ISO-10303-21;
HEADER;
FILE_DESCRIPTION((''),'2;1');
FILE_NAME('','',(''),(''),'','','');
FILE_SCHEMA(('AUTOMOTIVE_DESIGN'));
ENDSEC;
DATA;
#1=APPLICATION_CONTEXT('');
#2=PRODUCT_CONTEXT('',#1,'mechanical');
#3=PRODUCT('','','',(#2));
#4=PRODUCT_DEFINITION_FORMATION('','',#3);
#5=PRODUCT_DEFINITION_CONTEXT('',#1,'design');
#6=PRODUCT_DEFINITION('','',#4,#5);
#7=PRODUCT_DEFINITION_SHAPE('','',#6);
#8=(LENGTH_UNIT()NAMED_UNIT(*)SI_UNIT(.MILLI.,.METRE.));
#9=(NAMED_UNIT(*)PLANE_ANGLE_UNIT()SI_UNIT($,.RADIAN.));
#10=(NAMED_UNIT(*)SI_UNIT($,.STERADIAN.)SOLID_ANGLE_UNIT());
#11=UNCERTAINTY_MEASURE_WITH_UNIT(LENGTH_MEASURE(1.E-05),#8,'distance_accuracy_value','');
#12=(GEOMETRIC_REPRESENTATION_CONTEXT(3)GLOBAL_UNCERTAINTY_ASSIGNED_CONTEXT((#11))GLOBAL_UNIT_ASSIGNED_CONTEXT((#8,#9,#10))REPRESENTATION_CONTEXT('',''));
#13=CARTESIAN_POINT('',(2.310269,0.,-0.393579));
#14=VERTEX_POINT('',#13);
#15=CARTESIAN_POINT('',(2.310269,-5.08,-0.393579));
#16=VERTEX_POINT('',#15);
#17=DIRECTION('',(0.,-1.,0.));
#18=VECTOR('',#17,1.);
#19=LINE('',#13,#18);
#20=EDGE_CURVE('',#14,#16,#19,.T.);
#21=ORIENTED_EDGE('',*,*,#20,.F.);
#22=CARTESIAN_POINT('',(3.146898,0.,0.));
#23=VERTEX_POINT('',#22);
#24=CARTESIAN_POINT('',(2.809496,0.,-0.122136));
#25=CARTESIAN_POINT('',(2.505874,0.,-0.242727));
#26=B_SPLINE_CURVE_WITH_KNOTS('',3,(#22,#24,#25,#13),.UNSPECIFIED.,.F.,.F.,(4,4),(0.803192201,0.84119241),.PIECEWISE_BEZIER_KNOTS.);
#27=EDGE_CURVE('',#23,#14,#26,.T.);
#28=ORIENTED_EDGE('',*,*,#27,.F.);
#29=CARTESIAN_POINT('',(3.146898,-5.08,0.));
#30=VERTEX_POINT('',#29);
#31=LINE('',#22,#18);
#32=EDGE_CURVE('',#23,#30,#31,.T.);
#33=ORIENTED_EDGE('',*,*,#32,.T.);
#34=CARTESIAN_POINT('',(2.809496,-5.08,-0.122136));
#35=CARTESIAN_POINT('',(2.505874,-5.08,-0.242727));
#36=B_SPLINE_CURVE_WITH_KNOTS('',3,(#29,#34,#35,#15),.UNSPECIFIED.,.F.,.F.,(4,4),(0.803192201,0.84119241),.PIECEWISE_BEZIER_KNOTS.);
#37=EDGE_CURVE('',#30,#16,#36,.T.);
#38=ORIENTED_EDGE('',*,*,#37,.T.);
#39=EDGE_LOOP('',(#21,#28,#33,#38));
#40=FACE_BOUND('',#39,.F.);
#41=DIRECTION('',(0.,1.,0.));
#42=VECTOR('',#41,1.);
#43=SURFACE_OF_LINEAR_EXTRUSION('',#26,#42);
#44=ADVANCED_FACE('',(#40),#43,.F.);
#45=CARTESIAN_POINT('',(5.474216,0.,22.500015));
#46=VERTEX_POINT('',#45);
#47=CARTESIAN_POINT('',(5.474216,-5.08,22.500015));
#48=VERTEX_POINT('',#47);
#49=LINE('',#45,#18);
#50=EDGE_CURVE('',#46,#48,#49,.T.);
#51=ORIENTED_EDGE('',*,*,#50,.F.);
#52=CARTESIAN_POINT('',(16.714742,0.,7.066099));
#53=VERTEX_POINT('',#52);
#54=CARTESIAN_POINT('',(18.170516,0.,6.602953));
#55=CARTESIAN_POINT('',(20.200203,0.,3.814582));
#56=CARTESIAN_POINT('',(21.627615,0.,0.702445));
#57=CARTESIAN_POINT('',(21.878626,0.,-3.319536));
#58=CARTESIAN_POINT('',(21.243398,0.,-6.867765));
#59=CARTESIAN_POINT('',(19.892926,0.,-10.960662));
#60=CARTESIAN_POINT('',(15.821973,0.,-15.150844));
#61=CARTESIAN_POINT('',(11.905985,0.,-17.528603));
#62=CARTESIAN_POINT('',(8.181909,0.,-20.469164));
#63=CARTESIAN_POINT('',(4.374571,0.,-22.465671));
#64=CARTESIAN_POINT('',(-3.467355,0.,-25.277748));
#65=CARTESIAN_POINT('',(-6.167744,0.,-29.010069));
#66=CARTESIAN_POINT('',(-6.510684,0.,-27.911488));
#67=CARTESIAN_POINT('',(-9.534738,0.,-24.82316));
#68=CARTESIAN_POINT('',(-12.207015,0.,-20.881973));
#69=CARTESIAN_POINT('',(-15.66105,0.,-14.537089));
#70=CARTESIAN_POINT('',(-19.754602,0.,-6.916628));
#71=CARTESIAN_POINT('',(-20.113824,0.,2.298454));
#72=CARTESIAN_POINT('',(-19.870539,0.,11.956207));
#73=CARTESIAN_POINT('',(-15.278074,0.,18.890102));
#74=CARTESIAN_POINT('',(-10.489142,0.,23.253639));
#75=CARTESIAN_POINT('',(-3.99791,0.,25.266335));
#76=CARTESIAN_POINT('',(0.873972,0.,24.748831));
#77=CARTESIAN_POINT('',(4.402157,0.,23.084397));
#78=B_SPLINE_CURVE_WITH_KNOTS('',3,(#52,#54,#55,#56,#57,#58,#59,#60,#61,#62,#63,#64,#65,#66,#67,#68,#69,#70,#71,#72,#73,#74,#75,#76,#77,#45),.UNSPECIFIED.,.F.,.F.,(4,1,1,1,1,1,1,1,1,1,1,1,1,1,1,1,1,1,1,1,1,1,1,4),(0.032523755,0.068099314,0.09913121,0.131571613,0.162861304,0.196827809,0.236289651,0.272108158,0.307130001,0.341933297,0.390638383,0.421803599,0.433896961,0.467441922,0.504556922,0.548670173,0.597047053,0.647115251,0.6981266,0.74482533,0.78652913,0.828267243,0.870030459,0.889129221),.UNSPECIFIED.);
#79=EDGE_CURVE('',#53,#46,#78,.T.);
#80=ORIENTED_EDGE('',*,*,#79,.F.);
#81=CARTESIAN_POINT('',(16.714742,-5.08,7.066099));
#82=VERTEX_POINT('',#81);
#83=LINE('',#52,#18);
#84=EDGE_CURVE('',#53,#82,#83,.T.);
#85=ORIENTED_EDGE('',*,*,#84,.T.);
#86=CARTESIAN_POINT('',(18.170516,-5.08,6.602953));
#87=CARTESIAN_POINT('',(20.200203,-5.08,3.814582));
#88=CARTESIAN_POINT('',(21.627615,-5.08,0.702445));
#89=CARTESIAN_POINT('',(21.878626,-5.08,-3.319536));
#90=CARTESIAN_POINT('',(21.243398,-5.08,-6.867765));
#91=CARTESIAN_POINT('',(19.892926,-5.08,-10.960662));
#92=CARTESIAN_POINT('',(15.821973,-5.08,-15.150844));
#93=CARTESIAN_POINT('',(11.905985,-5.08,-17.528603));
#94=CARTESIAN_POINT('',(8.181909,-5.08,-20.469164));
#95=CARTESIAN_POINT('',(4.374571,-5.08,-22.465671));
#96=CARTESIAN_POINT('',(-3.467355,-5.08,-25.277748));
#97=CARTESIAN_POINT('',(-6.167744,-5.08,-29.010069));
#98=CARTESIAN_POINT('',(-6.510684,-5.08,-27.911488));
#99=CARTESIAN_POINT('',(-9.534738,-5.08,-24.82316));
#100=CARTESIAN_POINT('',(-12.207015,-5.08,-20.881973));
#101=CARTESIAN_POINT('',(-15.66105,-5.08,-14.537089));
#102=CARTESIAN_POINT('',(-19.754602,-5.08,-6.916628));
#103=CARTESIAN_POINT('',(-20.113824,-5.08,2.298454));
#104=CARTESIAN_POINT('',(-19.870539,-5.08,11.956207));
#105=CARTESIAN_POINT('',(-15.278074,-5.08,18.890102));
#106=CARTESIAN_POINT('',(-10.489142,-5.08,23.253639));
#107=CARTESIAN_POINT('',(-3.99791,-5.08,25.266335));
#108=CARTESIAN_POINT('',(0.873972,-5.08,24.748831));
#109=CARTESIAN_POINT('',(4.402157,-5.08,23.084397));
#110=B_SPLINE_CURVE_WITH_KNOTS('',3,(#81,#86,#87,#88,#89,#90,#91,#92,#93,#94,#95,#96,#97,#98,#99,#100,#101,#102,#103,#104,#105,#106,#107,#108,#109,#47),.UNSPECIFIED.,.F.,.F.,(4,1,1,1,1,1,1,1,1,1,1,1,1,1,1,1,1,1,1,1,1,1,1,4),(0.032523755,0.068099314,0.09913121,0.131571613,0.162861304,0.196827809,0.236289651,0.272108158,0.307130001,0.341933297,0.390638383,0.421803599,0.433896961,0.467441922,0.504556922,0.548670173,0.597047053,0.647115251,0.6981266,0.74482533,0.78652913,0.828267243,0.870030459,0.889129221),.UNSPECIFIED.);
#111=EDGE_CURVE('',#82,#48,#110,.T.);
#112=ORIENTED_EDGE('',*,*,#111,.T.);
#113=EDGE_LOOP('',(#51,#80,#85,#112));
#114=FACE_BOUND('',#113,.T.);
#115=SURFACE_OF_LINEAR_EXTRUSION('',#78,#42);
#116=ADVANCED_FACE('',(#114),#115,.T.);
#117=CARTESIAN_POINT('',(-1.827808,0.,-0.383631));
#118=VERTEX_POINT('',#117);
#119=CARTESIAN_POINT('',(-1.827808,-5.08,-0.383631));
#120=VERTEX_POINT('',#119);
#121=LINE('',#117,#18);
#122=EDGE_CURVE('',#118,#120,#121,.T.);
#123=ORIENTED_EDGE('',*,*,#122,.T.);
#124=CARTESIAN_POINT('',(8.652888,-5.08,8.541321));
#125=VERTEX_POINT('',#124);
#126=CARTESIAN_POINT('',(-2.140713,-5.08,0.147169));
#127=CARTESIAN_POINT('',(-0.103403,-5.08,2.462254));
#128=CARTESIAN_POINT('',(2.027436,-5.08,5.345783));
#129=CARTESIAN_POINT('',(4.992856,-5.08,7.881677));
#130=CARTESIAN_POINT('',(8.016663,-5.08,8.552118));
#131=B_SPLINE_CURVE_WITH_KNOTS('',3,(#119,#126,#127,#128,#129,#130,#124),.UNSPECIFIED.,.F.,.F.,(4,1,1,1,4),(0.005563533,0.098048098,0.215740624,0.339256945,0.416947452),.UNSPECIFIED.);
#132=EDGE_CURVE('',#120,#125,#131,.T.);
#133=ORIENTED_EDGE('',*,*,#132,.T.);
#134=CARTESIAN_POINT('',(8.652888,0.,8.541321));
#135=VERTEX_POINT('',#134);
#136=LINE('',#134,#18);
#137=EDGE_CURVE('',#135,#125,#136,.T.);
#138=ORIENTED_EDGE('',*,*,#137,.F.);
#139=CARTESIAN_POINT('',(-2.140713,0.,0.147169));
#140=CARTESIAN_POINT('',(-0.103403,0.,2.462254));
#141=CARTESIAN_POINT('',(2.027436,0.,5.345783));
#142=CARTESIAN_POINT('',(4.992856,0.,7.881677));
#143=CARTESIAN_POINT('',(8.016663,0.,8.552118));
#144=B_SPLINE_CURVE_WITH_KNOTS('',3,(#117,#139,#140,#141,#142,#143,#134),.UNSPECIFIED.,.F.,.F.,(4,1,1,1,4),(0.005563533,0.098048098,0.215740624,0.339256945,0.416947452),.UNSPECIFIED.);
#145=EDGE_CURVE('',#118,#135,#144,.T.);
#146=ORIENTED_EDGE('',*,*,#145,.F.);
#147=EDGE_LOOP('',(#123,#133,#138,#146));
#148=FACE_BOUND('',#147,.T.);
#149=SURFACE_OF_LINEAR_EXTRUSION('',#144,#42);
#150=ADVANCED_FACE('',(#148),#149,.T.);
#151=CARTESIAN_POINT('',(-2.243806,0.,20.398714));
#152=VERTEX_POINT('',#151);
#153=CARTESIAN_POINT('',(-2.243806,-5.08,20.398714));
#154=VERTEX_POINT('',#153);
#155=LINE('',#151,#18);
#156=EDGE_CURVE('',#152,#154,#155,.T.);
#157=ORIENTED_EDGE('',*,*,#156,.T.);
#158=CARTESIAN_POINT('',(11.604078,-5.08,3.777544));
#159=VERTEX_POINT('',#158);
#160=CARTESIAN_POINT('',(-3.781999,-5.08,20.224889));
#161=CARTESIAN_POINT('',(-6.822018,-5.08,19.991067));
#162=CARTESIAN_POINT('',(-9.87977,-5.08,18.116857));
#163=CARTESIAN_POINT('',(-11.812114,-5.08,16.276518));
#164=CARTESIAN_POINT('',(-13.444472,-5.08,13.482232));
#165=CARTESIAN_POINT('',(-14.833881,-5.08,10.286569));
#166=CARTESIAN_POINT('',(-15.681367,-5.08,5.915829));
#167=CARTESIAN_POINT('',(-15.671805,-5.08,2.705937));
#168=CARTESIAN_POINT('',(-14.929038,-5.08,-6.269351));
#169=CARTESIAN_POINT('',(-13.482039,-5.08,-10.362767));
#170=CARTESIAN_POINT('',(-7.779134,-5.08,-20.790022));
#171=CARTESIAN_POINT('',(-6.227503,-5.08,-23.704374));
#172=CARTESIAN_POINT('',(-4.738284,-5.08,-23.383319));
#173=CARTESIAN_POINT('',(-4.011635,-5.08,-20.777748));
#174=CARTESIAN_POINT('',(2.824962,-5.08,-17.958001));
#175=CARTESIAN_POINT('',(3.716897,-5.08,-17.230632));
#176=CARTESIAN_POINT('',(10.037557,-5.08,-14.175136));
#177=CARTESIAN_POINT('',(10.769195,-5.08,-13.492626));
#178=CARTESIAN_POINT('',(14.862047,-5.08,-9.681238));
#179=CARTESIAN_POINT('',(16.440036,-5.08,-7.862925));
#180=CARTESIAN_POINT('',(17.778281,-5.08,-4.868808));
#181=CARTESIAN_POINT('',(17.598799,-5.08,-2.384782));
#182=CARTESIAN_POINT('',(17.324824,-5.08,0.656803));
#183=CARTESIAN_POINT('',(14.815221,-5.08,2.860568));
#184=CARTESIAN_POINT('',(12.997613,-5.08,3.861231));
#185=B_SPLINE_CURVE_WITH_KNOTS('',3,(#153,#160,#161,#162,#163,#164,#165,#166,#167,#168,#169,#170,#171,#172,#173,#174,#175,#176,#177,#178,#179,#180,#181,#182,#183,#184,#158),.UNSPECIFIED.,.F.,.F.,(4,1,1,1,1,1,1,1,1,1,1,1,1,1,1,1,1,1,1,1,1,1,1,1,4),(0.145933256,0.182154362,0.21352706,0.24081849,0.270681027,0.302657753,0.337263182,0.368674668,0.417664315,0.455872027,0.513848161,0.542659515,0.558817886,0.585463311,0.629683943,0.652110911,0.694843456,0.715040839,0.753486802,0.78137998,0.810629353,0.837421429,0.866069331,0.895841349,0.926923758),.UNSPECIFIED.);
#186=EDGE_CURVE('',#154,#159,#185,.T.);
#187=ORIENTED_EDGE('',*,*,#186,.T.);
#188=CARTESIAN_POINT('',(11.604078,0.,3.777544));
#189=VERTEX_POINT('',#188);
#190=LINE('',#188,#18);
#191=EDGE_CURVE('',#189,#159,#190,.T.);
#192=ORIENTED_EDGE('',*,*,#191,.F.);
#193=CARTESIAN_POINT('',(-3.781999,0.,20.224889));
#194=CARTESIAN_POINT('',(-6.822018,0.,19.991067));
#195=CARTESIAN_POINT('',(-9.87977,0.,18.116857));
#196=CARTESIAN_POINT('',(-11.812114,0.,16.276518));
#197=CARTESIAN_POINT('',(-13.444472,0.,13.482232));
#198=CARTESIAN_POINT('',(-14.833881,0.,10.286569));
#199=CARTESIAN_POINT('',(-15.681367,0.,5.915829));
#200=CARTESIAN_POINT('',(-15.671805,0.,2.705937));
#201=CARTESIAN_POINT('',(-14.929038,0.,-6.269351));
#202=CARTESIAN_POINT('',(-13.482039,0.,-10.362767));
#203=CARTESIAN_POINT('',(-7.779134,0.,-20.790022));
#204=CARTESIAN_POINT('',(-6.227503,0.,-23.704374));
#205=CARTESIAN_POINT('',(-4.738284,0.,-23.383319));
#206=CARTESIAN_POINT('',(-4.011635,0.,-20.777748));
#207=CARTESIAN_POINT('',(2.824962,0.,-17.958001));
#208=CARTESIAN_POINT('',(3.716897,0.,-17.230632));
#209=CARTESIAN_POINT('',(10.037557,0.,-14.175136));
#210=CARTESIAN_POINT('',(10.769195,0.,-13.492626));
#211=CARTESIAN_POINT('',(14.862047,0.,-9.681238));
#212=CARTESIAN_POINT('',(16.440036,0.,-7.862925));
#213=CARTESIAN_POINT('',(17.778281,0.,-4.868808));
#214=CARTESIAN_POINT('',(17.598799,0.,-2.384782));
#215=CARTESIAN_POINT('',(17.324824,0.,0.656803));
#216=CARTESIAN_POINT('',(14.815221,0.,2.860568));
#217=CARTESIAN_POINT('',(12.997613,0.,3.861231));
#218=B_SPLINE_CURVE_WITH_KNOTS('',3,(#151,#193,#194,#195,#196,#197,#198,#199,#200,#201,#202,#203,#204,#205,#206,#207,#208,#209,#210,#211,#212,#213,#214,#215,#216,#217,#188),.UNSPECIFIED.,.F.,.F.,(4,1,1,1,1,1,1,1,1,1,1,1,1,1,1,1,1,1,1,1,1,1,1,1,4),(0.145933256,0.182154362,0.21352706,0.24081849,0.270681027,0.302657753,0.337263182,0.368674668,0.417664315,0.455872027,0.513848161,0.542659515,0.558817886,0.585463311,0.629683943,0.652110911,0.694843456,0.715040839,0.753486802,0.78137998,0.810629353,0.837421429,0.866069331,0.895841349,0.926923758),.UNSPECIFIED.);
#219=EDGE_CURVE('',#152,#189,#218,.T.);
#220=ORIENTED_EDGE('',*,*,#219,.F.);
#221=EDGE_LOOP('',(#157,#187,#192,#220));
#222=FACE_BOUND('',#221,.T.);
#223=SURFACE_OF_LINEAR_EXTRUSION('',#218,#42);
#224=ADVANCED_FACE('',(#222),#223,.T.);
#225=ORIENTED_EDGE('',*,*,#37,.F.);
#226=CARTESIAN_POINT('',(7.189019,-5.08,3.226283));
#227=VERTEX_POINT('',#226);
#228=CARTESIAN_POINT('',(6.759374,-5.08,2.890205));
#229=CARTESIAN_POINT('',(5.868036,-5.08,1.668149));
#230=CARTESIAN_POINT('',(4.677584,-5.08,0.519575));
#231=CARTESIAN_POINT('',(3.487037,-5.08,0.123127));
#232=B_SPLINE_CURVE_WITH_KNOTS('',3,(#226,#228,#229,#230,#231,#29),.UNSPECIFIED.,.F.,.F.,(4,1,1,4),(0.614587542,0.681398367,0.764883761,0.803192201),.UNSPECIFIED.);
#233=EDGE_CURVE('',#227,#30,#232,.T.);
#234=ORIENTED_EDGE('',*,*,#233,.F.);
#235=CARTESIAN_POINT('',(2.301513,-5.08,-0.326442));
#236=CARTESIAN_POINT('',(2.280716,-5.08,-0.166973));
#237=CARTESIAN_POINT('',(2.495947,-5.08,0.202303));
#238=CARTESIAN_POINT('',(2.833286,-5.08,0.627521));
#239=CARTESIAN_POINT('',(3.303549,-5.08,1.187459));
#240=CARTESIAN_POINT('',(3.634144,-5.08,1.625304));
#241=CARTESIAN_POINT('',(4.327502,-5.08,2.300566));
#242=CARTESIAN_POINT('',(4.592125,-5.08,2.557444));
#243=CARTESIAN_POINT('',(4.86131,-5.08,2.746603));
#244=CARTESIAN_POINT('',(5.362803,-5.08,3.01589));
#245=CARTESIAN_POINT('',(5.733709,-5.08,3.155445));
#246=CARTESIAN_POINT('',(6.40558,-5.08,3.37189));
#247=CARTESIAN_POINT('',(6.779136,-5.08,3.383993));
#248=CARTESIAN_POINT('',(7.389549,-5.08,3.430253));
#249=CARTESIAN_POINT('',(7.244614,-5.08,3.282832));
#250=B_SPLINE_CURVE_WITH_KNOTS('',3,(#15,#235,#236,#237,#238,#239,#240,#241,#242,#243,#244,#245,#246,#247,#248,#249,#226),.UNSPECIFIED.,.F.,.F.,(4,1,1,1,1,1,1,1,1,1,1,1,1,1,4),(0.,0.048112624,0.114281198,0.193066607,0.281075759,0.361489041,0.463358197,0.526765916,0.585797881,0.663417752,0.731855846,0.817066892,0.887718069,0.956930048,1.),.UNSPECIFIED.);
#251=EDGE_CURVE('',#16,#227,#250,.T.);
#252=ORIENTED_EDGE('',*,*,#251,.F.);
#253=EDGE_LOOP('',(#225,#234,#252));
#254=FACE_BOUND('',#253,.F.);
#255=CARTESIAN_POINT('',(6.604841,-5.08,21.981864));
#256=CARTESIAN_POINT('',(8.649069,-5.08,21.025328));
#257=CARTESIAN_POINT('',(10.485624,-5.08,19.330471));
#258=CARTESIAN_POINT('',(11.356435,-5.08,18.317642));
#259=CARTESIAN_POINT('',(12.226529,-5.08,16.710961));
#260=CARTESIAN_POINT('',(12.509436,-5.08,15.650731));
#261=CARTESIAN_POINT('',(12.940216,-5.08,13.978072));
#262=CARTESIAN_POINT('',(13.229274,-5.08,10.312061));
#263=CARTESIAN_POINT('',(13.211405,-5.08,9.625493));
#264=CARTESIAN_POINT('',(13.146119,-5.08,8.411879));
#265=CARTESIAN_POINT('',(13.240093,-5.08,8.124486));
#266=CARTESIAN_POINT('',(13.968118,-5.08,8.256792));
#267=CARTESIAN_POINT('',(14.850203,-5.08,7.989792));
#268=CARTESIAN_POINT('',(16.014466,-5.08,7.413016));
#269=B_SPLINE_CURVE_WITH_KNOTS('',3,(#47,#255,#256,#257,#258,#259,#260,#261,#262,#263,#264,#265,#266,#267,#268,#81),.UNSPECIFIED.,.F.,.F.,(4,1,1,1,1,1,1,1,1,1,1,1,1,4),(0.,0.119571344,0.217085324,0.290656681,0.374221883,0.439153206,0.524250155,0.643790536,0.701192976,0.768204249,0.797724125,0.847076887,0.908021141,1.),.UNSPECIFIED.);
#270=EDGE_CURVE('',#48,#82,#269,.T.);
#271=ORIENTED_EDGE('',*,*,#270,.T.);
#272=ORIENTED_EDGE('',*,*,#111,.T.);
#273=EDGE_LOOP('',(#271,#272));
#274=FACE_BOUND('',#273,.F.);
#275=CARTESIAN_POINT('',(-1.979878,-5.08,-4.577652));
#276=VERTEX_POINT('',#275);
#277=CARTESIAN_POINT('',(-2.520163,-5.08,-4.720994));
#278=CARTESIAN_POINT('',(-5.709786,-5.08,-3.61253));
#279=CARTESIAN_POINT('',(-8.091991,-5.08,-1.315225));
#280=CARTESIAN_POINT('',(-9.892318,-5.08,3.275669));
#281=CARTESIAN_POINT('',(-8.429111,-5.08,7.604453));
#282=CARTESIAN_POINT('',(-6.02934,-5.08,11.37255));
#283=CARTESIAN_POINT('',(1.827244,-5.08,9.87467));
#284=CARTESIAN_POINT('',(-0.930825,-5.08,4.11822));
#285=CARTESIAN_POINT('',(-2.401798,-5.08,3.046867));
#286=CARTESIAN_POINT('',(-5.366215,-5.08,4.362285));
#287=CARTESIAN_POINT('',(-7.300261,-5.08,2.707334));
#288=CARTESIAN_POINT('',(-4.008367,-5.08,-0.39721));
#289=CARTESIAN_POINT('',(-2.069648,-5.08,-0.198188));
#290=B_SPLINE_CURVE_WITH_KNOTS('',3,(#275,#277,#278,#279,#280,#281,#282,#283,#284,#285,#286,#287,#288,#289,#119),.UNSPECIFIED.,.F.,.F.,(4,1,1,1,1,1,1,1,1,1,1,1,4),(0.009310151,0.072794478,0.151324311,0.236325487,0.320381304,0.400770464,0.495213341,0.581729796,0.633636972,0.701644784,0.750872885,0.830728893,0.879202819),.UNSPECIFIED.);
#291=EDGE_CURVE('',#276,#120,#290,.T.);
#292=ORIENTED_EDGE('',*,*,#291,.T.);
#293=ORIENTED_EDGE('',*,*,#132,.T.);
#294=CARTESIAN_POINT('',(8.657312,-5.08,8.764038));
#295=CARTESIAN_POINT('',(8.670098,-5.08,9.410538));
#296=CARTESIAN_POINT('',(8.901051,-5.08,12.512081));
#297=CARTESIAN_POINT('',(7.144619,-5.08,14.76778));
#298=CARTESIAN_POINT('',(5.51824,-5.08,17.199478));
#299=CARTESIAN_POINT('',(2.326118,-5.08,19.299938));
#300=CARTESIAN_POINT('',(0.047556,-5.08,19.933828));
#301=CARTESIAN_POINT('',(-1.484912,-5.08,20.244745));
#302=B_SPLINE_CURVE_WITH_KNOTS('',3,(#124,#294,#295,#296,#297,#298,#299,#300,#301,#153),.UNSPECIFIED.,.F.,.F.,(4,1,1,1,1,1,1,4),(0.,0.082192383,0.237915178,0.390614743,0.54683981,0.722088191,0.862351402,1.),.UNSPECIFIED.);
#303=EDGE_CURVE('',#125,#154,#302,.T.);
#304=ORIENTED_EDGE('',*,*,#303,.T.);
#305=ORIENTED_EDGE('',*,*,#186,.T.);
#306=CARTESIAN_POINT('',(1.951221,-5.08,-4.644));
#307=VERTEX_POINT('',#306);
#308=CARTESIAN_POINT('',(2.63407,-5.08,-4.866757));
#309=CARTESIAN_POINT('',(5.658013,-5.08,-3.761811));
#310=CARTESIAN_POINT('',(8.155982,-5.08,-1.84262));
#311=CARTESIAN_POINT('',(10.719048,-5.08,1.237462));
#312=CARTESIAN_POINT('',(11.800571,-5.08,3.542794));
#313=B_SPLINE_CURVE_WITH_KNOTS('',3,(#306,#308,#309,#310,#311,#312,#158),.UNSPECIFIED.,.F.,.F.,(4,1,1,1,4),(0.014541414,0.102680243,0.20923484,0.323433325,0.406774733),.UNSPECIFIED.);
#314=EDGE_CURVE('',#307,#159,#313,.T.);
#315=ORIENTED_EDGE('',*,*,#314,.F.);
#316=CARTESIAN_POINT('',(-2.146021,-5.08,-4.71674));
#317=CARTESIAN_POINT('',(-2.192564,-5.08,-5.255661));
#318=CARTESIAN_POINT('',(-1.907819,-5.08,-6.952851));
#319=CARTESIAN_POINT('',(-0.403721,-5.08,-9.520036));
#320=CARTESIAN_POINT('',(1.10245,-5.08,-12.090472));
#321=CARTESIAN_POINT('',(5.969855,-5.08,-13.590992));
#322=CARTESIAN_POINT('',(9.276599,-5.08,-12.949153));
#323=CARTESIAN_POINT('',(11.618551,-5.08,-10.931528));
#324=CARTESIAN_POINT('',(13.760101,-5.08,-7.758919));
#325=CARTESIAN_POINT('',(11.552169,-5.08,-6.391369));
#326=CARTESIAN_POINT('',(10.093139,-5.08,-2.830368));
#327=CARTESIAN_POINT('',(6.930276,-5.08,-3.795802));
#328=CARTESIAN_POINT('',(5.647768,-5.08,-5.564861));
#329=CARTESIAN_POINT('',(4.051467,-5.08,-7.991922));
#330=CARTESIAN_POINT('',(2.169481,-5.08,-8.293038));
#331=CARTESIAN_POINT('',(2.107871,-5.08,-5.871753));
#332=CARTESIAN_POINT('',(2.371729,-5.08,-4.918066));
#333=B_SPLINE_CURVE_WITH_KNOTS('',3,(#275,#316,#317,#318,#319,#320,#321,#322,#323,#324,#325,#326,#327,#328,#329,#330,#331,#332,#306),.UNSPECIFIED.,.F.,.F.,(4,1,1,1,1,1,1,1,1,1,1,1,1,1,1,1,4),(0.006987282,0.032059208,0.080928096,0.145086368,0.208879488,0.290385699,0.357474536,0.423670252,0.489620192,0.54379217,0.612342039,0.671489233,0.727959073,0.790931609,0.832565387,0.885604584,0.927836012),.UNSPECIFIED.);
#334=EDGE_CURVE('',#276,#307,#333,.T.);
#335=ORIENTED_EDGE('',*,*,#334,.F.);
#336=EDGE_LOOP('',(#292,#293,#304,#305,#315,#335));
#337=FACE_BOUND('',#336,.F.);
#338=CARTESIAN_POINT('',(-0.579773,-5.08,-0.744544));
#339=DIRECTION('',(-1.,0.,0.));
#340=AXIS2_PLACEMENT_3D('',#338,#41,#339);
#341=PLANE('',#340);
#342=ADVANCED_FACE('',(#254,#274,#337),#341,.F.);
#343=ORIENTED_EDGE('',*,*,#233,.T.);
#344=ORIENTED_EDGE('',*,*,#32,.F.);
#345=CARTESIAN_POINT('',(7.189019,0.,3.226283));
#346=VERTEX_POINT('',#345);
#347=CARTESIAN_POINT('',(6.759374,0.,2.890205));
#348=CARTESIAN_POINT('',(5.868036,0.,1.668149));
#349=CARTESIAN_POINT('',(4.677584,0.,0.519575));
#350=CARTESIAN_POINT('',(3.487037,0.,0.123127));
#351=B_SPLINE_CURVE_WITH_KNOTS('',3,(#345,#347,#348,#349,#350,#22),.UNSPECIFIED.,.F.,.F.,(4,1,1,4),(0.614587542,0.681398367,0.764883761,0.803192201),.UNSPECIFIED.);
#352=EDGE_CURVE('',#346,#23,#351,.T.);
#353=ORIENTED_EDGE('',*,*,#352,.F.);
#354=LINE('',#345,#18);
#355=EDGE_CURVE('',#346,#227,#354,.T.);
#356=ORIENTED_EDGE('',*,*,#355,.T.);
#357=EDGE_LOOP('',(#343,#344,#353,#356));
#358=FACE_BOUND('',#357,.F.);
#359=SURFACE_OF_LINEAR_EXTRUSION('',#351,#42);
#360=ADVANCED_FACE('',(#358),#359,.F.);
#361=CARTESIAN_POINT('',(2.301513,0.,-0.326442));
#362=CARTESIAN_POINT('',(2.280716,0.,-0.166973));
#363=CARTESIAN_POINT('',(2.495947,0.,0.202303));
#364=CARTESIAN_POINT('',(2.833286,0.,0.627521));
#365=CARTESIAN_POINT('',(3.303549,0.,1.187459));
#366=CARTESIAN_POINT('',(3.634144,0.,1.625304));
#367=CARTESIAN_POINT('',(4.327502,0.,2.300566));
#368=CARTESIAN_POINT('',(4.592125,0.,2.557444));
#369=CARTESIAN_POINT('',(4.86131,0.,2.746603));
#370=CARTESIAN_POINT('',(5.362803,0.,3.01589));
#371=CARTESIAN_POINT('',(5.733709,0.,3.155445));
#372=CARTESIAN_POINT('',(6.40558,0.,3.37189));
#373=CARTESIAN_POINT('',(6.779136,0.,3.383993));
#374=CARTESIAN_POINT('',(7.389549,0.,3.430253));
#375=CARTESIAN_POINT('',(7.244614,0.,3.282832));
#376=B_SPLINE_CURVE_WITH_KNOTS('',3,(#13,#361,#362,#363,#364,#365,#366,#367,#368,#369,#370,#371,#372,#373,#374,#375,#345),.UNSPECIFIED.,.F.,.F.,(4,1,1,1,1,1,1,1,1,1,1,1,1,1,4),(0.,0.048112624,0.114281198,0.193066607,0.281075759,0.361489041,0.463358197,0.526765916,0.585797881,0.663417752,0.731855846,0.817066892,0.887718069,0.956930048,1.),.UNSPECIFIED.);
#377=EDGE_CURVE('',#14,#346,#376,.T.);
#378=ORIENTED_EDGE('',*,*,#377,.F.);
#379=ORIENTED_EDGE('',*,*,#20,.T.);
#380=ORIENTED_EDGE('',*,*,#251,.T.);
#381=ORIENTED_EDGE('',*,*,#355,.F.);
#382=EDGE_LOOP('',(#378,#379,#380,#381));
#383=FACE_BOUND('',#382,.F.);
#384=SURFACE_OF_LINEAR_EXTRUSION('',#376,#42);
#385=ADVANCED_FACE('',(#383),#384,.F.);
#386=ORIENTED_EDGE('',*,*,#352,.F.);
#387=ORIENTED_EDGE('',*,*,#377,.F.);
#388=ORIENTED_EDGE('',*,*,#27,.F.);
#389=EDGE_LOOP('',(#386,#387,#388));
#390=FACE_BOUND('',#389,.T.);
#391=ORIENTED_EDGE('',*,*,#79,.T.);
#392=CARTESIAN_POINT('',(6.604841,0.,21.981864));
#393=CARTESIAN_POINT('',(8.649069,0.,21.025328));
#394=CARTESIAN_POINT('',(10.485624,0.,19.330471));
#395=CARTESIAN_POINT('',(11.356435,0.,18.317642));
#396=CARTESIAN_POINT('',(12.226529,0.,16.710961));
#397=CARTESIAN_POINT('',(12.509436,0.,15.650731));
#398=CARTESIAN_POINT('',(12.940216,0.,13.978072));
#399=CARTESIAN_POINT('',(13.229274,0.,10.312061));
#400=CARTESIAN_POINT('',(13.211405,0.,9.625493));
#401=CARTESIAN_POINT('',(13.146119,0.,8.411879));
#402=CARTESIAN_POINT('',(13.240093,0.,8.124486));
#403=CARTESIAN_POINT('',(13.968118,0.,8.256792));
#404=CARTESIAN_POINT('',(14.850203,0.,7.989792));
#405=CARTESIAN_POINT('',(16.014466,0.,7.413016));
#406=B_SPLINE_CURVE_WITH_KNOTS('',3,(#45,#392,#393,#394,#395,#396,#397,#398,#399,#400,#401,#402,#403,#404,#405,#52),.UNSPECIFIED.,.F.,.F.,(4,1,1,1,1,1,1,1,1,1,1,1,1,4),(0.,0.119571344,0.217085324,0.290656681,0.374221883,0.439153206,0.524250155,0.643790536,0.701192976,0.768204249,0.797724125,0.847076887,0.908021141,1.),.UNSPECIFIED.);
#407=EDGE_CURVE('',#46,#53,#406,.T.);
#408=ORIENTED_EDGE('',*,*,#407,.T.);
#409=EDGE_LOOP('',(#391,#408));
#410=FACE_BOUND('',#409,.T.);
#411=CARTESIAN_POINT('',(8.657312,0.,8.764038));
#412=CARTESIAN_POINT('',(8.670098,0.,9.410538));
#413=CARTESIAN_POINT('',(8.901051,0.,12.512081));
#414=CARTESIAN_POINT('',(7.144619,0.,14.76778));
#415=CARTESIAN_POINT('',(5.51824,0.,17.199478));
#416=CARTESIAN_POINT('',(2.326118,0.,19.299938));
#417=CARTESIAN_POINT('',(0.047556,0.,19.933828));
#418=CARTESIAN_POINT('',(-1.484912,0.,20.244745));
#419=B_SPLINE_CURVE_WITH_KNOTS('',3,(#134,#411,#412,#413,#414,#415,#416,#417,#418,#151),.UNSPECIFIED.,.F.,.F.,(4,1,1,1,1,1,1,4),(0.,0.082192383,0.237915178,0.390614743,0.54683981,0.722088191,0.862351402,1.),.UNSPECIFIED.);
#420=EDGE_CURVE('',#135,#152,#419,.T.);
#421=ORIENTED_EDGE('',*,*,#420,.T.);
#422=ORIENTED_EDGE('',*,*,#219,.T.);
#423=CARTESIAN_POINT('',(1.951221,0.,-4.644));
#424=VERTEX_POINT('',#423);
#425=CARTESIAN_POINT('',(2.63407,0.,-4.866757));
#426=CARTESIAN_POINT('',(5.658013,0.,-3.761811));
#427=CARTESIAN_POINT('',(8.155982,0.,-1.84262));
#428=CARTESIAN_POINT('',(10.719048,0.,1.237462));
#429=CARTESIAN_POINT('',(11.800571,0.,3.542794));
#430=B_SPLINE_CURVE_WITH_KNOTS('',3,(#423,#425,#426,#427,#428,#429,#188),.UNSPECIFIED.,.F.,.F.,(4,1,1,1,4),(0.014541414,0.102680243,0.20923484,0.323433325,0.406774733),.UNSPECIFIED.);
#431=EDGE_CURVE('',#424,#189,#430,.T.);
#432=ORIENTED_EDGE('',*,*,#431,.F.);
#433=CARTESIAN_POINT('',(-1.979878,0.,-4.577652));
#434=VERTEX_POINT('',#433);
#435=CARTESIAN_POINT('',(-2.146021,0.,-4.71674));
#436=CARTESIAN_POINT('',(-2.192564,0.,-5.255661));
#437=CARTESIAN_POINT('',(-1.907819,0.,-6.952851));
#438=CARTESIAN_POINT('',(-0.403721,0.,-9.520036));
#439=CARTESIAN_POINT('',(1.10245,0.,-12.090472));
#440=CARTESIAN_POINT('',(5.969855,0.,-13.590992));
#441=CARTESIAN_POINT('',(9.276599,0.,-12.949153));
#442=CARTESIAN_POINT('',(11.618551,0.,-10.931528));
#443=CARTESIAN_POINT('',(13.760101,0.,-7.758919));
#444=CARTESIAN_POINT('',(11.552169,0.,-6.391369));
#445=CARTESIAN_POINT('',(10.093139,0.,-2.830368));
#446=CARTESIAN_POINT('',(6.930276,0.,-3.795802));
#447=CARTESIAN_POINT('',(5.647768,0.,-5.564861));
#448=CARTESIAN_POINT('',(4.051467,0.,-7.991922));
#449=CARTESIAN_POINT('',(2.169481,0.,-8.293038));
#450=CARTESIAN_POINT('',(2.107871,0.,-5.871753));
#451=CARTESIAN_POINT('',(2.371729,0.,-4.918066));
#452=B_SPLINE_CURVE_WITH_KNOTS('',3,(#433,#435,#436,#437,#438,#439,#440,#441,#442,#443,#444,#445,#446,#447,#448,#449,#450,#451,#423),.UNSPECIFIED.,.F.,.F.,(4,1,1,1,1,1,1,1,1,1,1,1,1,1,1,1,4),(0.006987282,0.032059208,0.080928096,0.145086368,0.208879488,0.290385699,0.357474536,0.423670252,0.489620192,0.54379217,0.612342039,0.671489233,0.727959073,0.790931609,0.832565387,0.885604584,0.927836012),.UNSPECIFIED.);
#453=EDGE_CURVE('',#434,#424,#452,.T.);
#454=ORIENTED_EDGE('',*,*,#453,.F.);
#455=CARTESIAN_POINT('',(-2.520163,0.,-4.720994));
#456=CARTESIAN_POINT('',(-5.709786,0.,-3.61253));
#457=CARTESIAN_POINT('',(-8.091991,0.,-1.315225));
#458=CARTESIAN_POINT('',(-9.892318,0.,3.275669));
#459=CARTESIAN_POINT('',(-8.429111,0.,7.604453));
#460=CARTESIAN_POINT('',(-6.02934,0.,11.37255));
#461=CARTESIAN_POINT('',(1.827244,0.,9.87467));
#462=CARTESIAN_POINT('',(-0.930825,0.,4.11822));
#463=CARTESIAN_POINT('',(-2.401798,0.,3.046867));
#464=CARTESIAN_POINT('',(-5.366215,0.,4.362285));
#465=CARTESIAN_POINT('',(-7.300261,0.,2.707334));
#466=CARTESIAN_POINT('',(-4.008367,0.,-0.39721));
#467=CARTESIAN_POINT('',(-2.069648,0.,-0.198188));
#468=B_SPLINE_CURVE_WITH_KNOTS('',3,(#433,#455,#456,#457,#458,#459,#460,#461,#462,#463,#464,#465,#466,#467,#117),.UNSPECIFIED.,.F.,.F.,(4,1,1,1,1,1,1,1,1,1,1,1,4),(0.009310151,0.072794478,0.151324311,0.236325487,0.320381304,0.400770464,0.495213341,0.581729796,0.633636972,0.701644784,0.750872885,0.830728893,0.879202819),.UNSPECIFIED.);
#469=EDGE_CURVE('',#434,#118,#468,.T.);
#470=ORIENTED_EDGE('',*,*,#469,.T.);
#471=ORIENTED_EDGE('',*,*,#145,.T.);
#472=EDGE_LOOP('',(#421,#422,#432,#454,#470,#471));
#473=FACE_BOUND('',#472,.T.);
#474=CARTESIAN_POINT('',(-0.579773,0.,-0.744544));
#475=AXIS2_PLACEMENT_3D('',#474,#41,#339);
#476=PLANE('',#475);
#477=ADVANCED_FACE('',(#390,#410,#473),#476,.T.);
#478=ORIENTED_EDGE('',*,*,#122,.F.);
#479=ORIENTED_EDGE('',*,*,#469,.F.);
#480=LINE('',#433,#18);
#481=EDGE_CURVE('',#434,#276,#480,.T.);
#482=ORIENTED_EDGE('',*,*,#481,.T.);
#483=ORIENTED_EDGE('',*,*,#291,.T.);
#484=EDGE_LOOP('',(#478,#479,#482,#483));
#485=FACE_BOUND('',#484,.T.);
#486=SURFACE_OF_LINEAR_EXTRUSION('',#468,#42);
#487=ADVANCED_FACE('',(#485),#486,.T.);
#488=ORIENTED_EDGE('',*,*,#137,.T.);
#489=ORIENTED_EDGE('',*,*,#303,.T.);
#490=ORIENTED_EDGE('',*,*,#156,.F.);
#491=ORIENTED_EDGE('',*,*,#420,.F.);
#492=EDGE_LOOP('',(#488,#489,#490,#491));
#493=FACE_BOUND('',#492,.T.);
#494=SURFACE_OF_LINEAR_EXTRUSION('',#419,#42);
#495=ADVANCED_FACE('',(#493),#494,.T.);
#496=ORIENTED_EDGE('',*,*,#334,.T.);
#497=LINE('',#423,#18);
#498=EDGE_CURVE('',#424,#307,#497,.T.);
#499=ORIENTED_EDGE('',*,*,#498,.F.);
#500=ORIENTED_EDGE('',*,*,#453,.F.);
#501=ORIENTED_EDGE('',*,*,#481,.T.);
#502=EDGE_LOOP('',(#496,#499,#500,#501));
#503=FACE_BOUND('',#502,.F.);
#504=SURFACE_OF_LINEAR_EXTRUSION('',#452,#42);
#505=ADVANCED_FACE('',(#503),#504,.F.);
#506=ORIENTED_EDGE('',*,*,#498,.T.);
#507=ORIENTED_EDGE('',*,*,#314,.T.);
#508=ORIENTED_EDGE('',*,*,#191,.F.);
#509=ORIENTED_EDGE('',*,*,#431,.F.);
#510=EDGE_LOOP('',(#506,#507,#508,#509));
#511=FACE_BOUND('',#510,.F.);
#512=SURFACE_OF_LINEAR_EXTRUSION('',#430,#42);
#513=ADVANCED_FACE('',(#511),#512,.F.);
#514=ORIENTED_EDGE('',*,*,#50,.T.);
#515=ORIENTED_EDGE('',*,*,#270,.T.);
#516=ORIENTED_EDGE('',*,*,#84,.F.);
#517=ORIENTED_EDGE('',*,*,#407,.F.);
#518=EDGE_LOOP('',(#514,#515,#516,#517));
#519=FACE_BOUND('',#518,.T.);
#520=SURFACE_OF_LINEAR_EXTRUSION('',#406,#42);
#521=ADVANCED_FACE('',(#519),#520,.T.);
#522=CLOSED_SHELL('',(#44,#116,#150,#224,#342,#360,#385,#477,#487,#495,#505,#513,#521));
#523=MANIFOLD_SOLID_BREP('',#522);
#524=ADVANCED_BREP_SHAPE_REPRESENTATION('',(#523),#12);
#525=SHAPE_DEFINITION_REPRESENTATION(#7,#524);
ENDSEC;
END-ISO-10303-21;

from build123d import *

# Parameters (mm, degrees)
F1_DEPTH = 5.08


with BuildPart() as f1:
    # F0 (on Front) → F1 (new body)
    with BuildSketch(Plane.XZ):
        with BuildLine():
            add(Edge.make_bspline(
                [(12.9434475675, 7.9712104052), (13.7422922583, 7.0552895324), (15.383850226, 7.4895155838), (16.7147424072, 7.0660994388)],
                knots=[0, 0, 0, 0, 0.032523755, 0.032523755, 0.032523755, 0.032523755], degree=3))
            add(Edge.make_bspline(
                [(5.4742157617, 22.5000154136), (7.1555189659, 21.5835338766), (10.6079264327, 19.2692823236), (12.792965037, 16.3012717327), (11.8126951939, 9.2676823139), (12.9434475675, 7.9712104052)],
                knots=[0.8891292206, 0.8891292206, 0.8891292206, 0.8891292206, 0.9190816899, 0.953963125, 1, 1, 1, 1], degree=3))
            add(Edge.make_bspline(
                [(16.7147424072, 7.0660994388), (18.1705162912, 6.6029528559), (20.2002028353, 3.814582201), (21.6276154231, 0.7024454413), (21.878625851, -3.3195361715), (21.2433984405, -6.8677651224), (19.8929255019, -10.9606617131), (15.8219732338, -15.1508443216), (11.9059849161, -17.5286027662), (8.1819090495, -20.4691639784), (4.3745709963, -22.4656705166), (-3.4673550639, -25.2777475035), (-6.167744379, -29.0100693047), (-6.5106842161, -27.9114880188), (-9.5347384807, -24.8231598988), (-12.2070153118, -20.8819726602), (-15.6610498633, -14.5370892856), (-19.7546022552, -6.9166280429), (-20.1138235132, 2.2984539167), (-19.8705389779, 11.9562072399), (-15.278074064, 18.890101701), (-10.4891420475, 23.2536387617), (-3.9979098859, 25.2663354367), (0.8739724373, 24.7488313876), (4.4021569327, 23.0843966965), (5.4742157617, 22.5000154136)],
                knots=[0.032523755, 0.032523755, 0.032523755, 0.032523755, 0.0680993139, 0.0991312099, 0.1315716129, 0.1628613037, 0.196827809, 0.236289651, 0.2721081581, 0.3071300006, 0.3419332968, 0.3906383827, 0.4218035991, 0.4338969606, 0.4674419223, 0.5045569221, 0.5486701725, 0.5970470533, 0.6471152509, 0.6981266005, 0.7448253301, 0.78652913, 0.8282672434, 0.8700304589, 0.8891292206, 0.8891292206, 0.8891292206, 0.8891292206], degree=3))
        make_face()
        with BuildLine():
            add(Edge.make_bspline(
                [(9.0967267751, 8.4237661214), (9.7069410751, 10.3688971985), (9.3624503168, 13.3425321942), (7.5865512086, 15.6957624178), (2.4737122894, 21.0601027649), (-0.723359108, 20.5705333992), (-2.2438063755, 20.398713648)],
                knots=[0, 0, 0, 0, 0.0368945944, 0.0659817142, 0.1101300123, 0.1459332556, 0.1459332556, 0.1459332556, 0.1459332556], degree=3))
            add(Edge.make_bspline(
                [(9.0967267751, 8.4237661214), (9.1872830239, 8.3111572264), (9.0681882989, 8.1135522795), (8.8912698228, 7.8312355092)],
                knots=[0.4443179154, 0.4443179154, 0.4443179154, 0.4443179154, 0.4846199148, 0.4846199148, 0.4846199148, 0.4846199148], degree=3))
            add(Edge.make_bspline(
                [(8.1878295542, 6.1687122103), (8.4276217366, 6.7047841314), (8.6811453239, 7.2721646139), (8.8912698228, 7.8312355092)],
                knots=[0.9858997333, 0.9858997333, 0.9858997333, 0.9858997333, 0.9962963428, 0.9962963428, 0.9962963428, 0.9962963428], degree=3))
            add(Edge.make_bspline(
                [(8.1878295542, 6.1687122103), (7.9519461393, 5.0983688069), (7.8984629879, 3.8675557621), (7.4740075511, 3.4131261086)],
                knots=[0.5409332024, 0.5409332024, 0.5409332024, 0.5409332024, 0.62901496, 0.62901496, 0.62901496, 0.62901496], degree=3))
            add(Edge.make_bspline(
                [(11.6040781144, 3.7775444798), (11.477478549, 3.9287928754), (10.5416642667, 3.5638397897), (8.9438364915, 3.5797258967), (7.9210026078, 3.6470259541), (7.4740075511, 3.4131261086)],
                knots=[0.4067747328, 0.4067747328, 0.4067747328, 0.4067747328, 0.4604712364, 0.5331639229, 0.600084085, 0.600084085, 0.600084085, 0.600084085], degree=3))
            add(Edge.make_bspline(
                [(-2.2438063755, 20.398713648), (-3.7819989375, 20.224888571), (-6.8220176706, 19.9910669526), (-9.8797703177, 18.1168573882), (-11.812113507, 16.2765180291), (-13.4444724283, 13.4822315791), (-14.8338814066, 10.2865686751), (-15.6813672061, 5.915829452), (-15.6718048809, 2.7059369547), (-14.9290377763, -6.2693506201), (-13.4820392885, -10.3627665386), (-7.7791336314, -20.7900216933), (-6.2275032167, -23.7043743852), (-4.7382841994, -23.3833187142), (-4.0116352012, -20.7777478604), (2.824962194, -17.9580007864), (3.716896785, -17.2306321515), (10.0375567411, -14.1751357177), (10.7691950561, -13.4926255954), (14.8620469506, -9.6812376421), (16.4400359685, -7.862924936), (17.7782814094, -4.8688079952), (17.5987993114, -2.3847821386), (17.3248237757, 0.6568030056), (14.8152209906, 2.8605684796), (12.9976128942, 3.8612308109), (11.6040781144, 3.7775444798)],
                knots=[0.1459332556, 0.1459332556, 0.1459332556, 0.1459332556, 0.1821543621, 0.2135270595, 0.2408184896, 0.2706810267, 0.3026577533, 0.337263182, 0.3686746682, 0.4176643155, 0.4558720272, 0.5138481612, 0.5426595154, 0.5588178858, 0.5854633115, 0.6296839427, 0.6521109106, 0.694843456, 0.7150408388, 0.7534868015, 0.7813799803, 0.8106293525, 0.8374214288, 0.8660693306, 0.8958413494, 0.9269237582, 0.9269237582, 0.9269237582, 0.9269237582], degree=3))
        make_face(mode=Mode.SUBTRACT)
        with BuildLine():
            add(Edge.make_bspline(
                [(1.744488909, -4.5375019388), (0.8677657326, -4.1725261398), (-1.1165877802, -4.1685723882), (-1.8031777586, -4.4715595432)],
                knots=[0.9337541015, 0.9337541015, 0.9337541015, 0.9337541015, 1, 1, 1, 1], degree=3))
            add(Edge.make_bspline(
                [(-1.8031777586, -4.4715595432), (-1.8404559451, -4.5218687655), (-1.9006442707, -4.5566302305), (-1.979878497, -4.5776517812)],
                knots=[0, 0, 0, 0, 0.0093101506, 0.0093101506, 0.0093101506, 0.0093101506], degree=3))
            add(Edge.make_bspline(
                [(-1.979878497, -4.5776517812), (-2.146021277, -4.716740037), (-2.1925637655, -5.25566125), (-1.9078192507, -6.9528509723), (-0.403720935, -9.5200361407), (1.1024497908, -12.0904717018), (5.9698548069, -13.5909916524), (9.276599084, -12.9491526932), (11.6185507007, -10.9315279312), (13.76010128, -7.7589194164), (11.552169362, -6.3913693678), (10.0931389819, -2.8303683478), (6.9302755238, -3.7958015432), (5.6477683482, -5.5648613441), (4.0514665571, -7.9919223412), (2.1694807148, -8.2930380541), (2.1078713866, -5.871753229), (2.3717293581, -4.9180660729), (1.9512213842, -4.6439997454)],
                knots=[0.0069872817, 0.0069872817, 0.0069872817, 0.0069872817, 0.0320592076, 0.0809280957, 0.1450863675, 0.2088794877, 0.2903856989, 0.3574745355, 0.4236702519, 0.4896201918, 0.5437921697, 0.6123420385, 0.6714892327, 0.7279590727, 0.7909316087, 0.8325653872, 0.8856045843, 0.927836012, 0.927836012, 0.927836012, 0.927836012], degree=3))
            add(Edge.make_bspline(
                [(1.744488909, -4.5375019388), (1.803345129, -4.5832576861), (1.8727532468, -4.6184021256), (1.9512213842, -4.6439997454)],
                knots=[0.0044131286, 0.0044131286, 0.0044131286, 0.0044131286, 0.0145414142, 0.0145414142, 0.0145414142, 0.0145414142], degree=3))
        make_face()
        with BuildLine():
            add(Edge.make_bspline(
                [(-1.7579157138, -0.4739991861), (-1.6405143241, -0.7798892701), (-2.882157981, -2.3349896326), (-1.5683680299, -4.1546692657), (-1.8031777586, -4.4715595432)],
                knots=[0.8857175032, 0.8857175032, 0.8857175032, 0.8857175032, 0.9413567518, 1, 1, 1, 1], degree=3))
            add(Edge.make_bspline(
                [(-1.7579157138, -0.4739991861), (-1.7857845561, -0.4457267794), (-1.8089843102, -0.4155614822), (-1.8278075546, -0.3836305383)],
                knots=[0, 0, 0, 0, 0.0055635331, 0.0055635331, 0.0055635331, 0.0055635331], degree=3))
            add(Edge.make_bspline(
                [(-1.979878497, -4.5776517812), (-2.5201631579, -4.7209941468), (-5.709785766, -3.6125301156), (-8.0919908162, -1.3152249443), (-9.892318063, 3.2756686057), (-8.4291106971, 7.6044533422), (-6.0293395893, 11.3725496958), (1.8272435626, 9.874669536), (-0.930824539, 4.1182200569), (-2.4017982853, 3.0468672357), (-5.3662148015, 4.3622845997), (-7.3002610522, 2.7073335898), (-4.008367442, -0.3972096502), (-2.0696477036, -0.198188239), (-1.8278075546, -0.3836305383)],
                knots=[0.0093101506, 0.0093101506, 0.0093101506, 0.0093101506, 0.0727944781, 0.1513243107, 0.2363254873, 0.3203813039, 0.4007704635, 0.4952133406, 0.5817297964, 0.6336369718, 0.701644784, 0.7508728854, 0.8307288933, 0.879202819, 0.879202819, 0.879202819, 0.879202819], degree=3))
            add(Edge.make_bspline(
                [(-1.8031777586, -4.4715595432), (-1.8755957909, -4.5035170932), (-1.9335762537, -4.5388893489), (-1.979878497, -4.5776517812)],
                knots=[0, 0, 0, 0, 0.0069872817, 0.0069872817, 0.0069872817, 0.0069872817], degree=3))
        make_face()
        with BuildLine():
            add(Edge.make_bspline(
                [(-1.8278075546, -0.3836305383), (-1.7953052931, -0.4085531748), (-1.7716619991, -0.4381831504), (-1.7579157138, -0.4739991861)],
                knots=[0.879202819, 0.879202819, 0.879202819, 0.879202819, 0.8857175032, 0.8857175032, 0.8857175032, 0.8857175032], degree=3))
            add(Edge.make_bspline(
                [(2.3102690265, -0.3935788376), (0.9132157908, -0.8697028836), (-1.2372399352, -1.0022147899), (-1.7579157138, -0.4739991861)],
                knots=[0.8960560721, 0.8960560721, 0.8960560721, 0.8960560721, 1, 1, 1, 1], degree=3))
            add(Edge.make_bspline(
                [(2.3102690265, -0.3935788376), (2.3015133476, -0.3264421477), (2.2807161141, -0.16697337), (2.4959470425, 0.2023034541), (2.8332862832, 0.627521192), (3.3035486755, 1.1874585024), (3.6341437843, 1.6253036501), (4.327502156, 2.3005659752), (4.5921245208, 2.5574437721), (4.8613102163, 2.746603002), (5.3628034531, 3.0158902117), (5.7337093938, 3.155444778), (6.4055800983, 3.3718904366), (6.7791361032, 3.38399349), (7.3895491313, 3.4302530419), (7.2446144262, 3.2828315968), (7.1890192765, 3.2262825646)],
                knots=[0, 0, 0, 0, 0.048112624, 0.1142811977, 0.1930666071, 0.2810757592, 0.3614890412, 0.4633581969, 0.5267659163, 0.5857978813, 0.6634177515, 0.731855846, 0.8170668919, 0.8877180691, 0.9569300482, 1, 1, 1, 1], degree=3))
            add(Edge.make_bspline(
                [(7.4740075511, 3.4131261086), (7.3771313095, 3.3624335168), (7.2822878055, 3.2992392111), (7.1890192765, 3.2262825646)],
                knots=[0.600084085, 0.600084085, 0.600084085, 0.600084085, 0.6145875424, 0.6145875424, 0.6145875424, 0.6145875424], degree=3))
            add(Edge.make_bspline(
                [(7.4740075511, 3.4131261086), (7.1291072241, 3.8052925292), (7.6199644355, 4.8992106691), (8.1878295542, 6.1687122103)],
                knots=[0.9612789478, 0.9612789478, 0.9612789478, 0.9612789478, 0.9858997333, 0.9858997333, 0.9858997333, 0.9858997333], degree=3))
            add(Edge.make_bspline(
                [(8.8912698228, 7.8312355092), (8.7443724115, 7.5968247023), (8.4300813424, 7.1040674235), (8.2490221942, 6.4463796274), (8.1878295542, 6.1687122103)],
                knots=[0.4846199148, 0.4846199148, 0.4846199148, 0.4846199148, 0.5180831207, 0.5409332024, 0.5409332024, 0.5409332024, 0.5409332024], degree=3))
            add(Edge.make_bspline(
                [(8.8912698228, 7.8312355092), (8.9661239491, 8.0303972616), (9.035470522, 8.2285044873), (9.0967267751, 8.4237661214)],
                knots=[0.9962963428, 0.9962963428, 0.9962963428, 0.9962963428, 1, 1, 1, 1], degree=3))
            add(Edge.make_bspline(
                [(8.6528882261, 8.5413210223), (8.8770312131, 8.5375170606), (9.0352269363, 8.5002426648), (9.0967267751, 8.4237661214)],
                knots=[0.4169474523, 0.4169474523, 0.4169474523, 0.4169474523, 0.4443179154, 0.4443179154, 0.4443179154, 0.4443179154], degree=3))
            add(Edge.make_bspline(
                [(-1.8278075546, -0.3836305383), (-2.1407129568, 0.1471687553), (-0.1034026768, 2.4622539742), (2.0274359286, 5.3457828035), (4.9928557529, 7.8816766991), (8.0166628772, 8.5521184907), (8.6528882261, 8.5413210223)],
                knots=[0.0055635331, 0.0055635331, 0.0055635331, 0.0055635331, 0.0980480978, 0.215740624, 0.3392569447, 0.4169474523, 0.4169474523, 0.4169474523, 0.4169474523], degree=3))
        make_face()
        with BuildLine():
            add(Edge.make_bspline(
                [(3.1468981293, 0), (2.931951581, -0.1477729586), (2.6424011492, -0.2803862363), (2.3102690265, -0.3935788376)],
                knots=[0.8713446892, 0.8713446892, 0.8713446892, 0.8713446892, 0.8960560721, 0.8960560721, 0.8960560721, 0.8960560721], degree=3))
            add(Edge.make_bspline(
                [(2.3102690265, -0.3935788376), (2.2891118291, -0.4098954773), (1.971742302, -0.6758503244), (2.0399786517, -1.5629956952), (1.21914474, -3.9633726364), (1.6736872489, -4.4715595432)],
                knots=[0.8411924098, 0.8411924098, 0.8411924098, 0.8411924098, 0.8453026302, 0.9067646188, 1, 1, 1, 1], degree=3))
            add(Edge.make_bspline(
                [(1.6736872489, -4.4715595432), (1.6952021989, -4.495613654), (1.7188438904, -4.5175650996), (1.744488909, -4.5375019388)],
                knots=[0, 0, 0, 0, 0.0044131286, 0.0044131286, 0.0044131286, 0.0044131286], degree=3))
            add(Edge.make_bspline(
                [(1.9512213842, -4.6439997454), (1.8922936141, -4.6055935355), (1.8228111359, -4.5701071192), (1.744488909, -4.5375019388)],
                knots=[0.927836012, 0.927836012, 0.927836012, 0.927836012, 0.9337541015, 0.9337541015, 0.9337541015, 0.9337541015], degree=3))
            add(Edge.make_bspline(
                [(1.9512213842, -4.6439997454), (2.6340703917, -4.866756521), (5.6580125852, -3.7618111603), (8.1559819998, -1.8426201103), (10.7190482079, 1.2374621807), (11.8005710941, 3.5427944801), (11.6040781144, 3.7775444798)],
                knots=[0.0145414142, 0.0145414142, 0.0145414142, 0.0145414142, 0.1026802428, 0.2092348396, 0.323433325, 0.4067747328, 0.4067747328, 0.4067747328, 0.4067747328], degree=3))
            add(Edge.make_bspline(
                [(11.6040781144, 3.7775444798), (10.0638129481, 3.6850465082), (7.955272299, 2.8659075101), (7.4740075511, 3.4131261086)],
                knots=[0.9269237582, 0.9269237582, 0.9269237582, 0.9269237582, 0.9612789478, 0.9612789478, 0.9612789478, 0.9612789478], degree=3))
            add(Edge.make_bspline(
                [(7.4740075511, 3.4131261086), (7.3918812609, 3.3252002196), (7.2958669077, 3.2663397401), (7.1890192765, 3.2262825646)],
                knots=[0.62901496, 0.62901496, 0.62901496, 0.62901496, 0.6460575689, 0.6460575689, 0.6460575689, 0.6460575689], degree=3))
            add(Edge.make_bspline(
                [(7.1890192765, 3.2262825646), (6.7593736336, 2.8902045151), (5.868035884, 1.6681491471), (4.6775838255, 0.5195748672), (3.4870370119, 0.1231265872), (3.1468981293, 0)],
                knots=[0.6145875424, 0.6145875424, 0.6145875424, 0.6145875424, 0.6813983666, 0.7648837608, 0.8031922007, 0.8031922007, 0.8031922007, 0.8031922007], degree=3))
        make_face()
        with BuildLine():
            add(Edge.make_bspline(
                [(2.3102690265, -0.3935788376), (0.9132157908, -0.8697028836), (-1.2372399352, -1.0022147899), (-1.7579157138, -0.4739991861)],
                knots=[0.8960560721, 0.8960560721, 0.8960560721, 0.8960560721, 1, 1, 1, 1], degree=3))
            add(Edge.make_bspline(
                [(-1.7579157138, -0.4739991861), (-1.6405143241, -0.7798892701), (-2.882157981, -2.3349896326), (-1.5683680299, -4.1546692657), (-1.8031777586, -4.4715595432)],
                knots=[0.8857175032, 0.8857175032, 0.8857175032, 0.8857175032, 0.9413567518, 1, 1, 1, 1], degree=3))
            add(Edge.make_bspline(
                [(1.744488909, -4.5375019388), (0.8677657326, -4.1725261398), (-1.1165877802, -4.1685723882), (-1.8031777586, -4.4715595432)],
                knots=[0.9337541015, 0.9337541015, 0.9337541015, 0.9337541015, 1, 1, 1, 1], degree=3))
            add(Edge.make_bspline(
                [(1.6736872489, -4.4715595432), (1.6952021989, -4.495613654), (1.7188438904, -4.5175650996), (1.744488909, -4.5375019388)],
                knots=[0, 0, 0, 0, 0.0044131286, 0.0044131286, 0.0044131286, 0.0044131286], degree=3))
            add(Edge.make_bspline(
                [(2.3102690265, -0.3935788376), (2.2891118291, -0.4098954773), (1.971742302, -0.6758503244), (2.0399786517, -1.5629956952), (1.21914474, -3.9633726364), (1.6736872489, -4.4715595432)],
                knots=[0.8411924098, 0.8411924098, 0.8411924098, 0.8411924098, 0.8453026302, 0.9067646188, 1, 1, 1, 1], degree=3))
        make_face()
        with BuildLine():
            add(Edge.make_bspline(
                [(8.6528882261, 8.5413210223), (8.6573118025, 8.764038379), (8.6700982482, 9.4105376627), (8.9010512795, 12.5120811805), (7.1446185412, 14.7677796511), (5.5182396397, 17.1994777703), (2.3261182047, 19.2999381018), (0.0475557452, 19.9338278093), (-1.4849121292, 20.2447450015), (-2.2438063755, 20.398713648)],
                knots=[0, 0, 0, 0, 0.0821923834, 0.2379151781, 0.3906147434, 0.5468398096, 0.7220881909, 0.8623514019, 1, 1, 1, 1], degree=3))
            add(Edge.make_bspline(
                [(8.6528882261, 8.5413210223), (8.8770312131, 8.5375170606), (9.0352269363, 8.5002426648), (9.0967267751, 8.4237661214)],
                knots=[0.4169474523, 0.4169474523, 0.4169474523, 0.4169474523, 0.4443179154, 0.4443179154, 0.4443179154, 0.4443179154], degree=3))
            add(Edge.make_bspline(
                [(9.0967267751, 8.4237661214), (9.7069410751, 10.3688971985), (9.3624503168, 13.3425321942), (7.5865512086, 15.6957624178), (2.4737122894, 21.0601027649), (-0.723359108, 20.5705333992), (-2.2438063755, 20.398713648)],
                knots=[0, 0, 0, 0, 0.0368945944, 0.0659817142, 0.1101300123, 0.1459332556, 0.1459332556, 0.1459332556, 0.1459332556], degree=3))
        make_face()
        with BuildLine():
            add(Edge.make_bspline(
                [(5.4742157617, 22.5000154136), (7.1555189659, 21.5835338766), (10.6079264327, 19.2692823236), (12.792965037, 16.3012717327), (11.8126951939, 9.2676823139), (12.9434475675, 7.9712104052)],
                knots=[0.8891292206, 0.8891292206, 0.8891292206, 0.8891292206, 0.9190816899, 0.953963125, 1, 1, 1, 1], degree=3))
            add(Edge.make_bspline(
                [(12.9434475675, 7.9712104052), (13.7422922583, 7.0552895324), (15.383850226, 7.4895155838), (16.7147424072, 7.0660994388)],
                knots=[0, 0, 0, 0, 0.032523755, 0.032523755, 0.032523755, 0.032523755], degree=3))
            add(Edge.make_bspline(
                [(5.4742157617, 22.5000154136), (6.6048410807, 21.9818635579), (8.6490692728, 21.025327604), (10.4856235733, 19.3304707963), (11.356435302, 18.3176420356), (12.2265285656, 16.7109611742), (12.5094360307, 15.650730737), (12.9402160784, 13.9780720862), (13.2292736889, 10.3120608325), (13.2114050623, 9.6254933886), (13.1461194399, 8.4118788475), (13.2400934952, 8.1244857275), (13.9681184874, 8.2567923399), (14.8502028926, 7.989792145), (16.0144664232, 7.4130160971), (16.7147424072, 7.0660994388)],
                knots=[0, 0, 0, 0, 0.1195713442, 0.2170853235, 0.2906566812, 0.3742218826, 0.4391532056, 0.5242501548, 0.6437905361, 0.7011929757, 0.768204249, 0.7977241252, 0.8470768871, 0.9080211414, 1, 1, 1, 1], degree=3))
        make_face()
        with BuildLine():
            add(Edge.make_bspline(
                [(7.4740075511, 3.4131261086), (7.1291072241, 3.8052925292), (7.6199644355, 4.8992106691), (8.1878295542, 6.1687122103)],
                knots=[0.9612789478, 0.9612789478, 0.9612789478, 0.9612789478, 0.9858997333, 0.9858997333, 0.9858997333, 0.9858997333], degree=3))
            add(Edge.make_bspline(
                [(8.1878295542, 6.1687122103), (7.9519461393, 5.0983688069), (7.8984629879, 3.8675557621), (7.4740075511, 3.4131261086)],
                knots=[0.5409332024, 0.5409332024, 0.5409332024, 0.5409332024, 0.62901496, 0.62901496, 0.62901496, 0.62901496], degree=3))
        make_face()
        with BuildLine():
            add(Edge.make_bspline(
                [(11.6040781144, 3.7775444798), (11.477478549, 3.9287928754), (10.5416642667, 3.5638397897), (8.9438364915, 3.5797258967), (7.9210026078, 3.6470259541), (7.4740075511, 3.4131261086)],
                knots=[0.4067747328, 0.4067747328, 0.4067747328, 0.4067747328, 0.4604712364, 0.5331639229, 0.600084085, 0.600084085, 0.600084085, 0.600084085], degree=3))
            add(Edge.make_bspline(
                [(11.6040781144, 3.7775444798), (10.0638129481, 3.6850465082), (7.955272299, 2.8659075101), (7.4740075511, 3.4131261086)],
                knots=[0.9269237582, 0.9269237582, 0.9269237582, 0.9269237582, 0.9612789478, 0.9612789478, 0.9612789478, 0.9612789478], degree=3))
        make_face()
        with BuildLine():
            add(Edge.make_bspline(
                [(8.1878295542, 6.1687122103), (8.4276217366, 6.7047841314), (8.6811453239, 7.2721646139), (8.8912698228, 7.8312355092)],
                knots=[0.9858997333, 0.9858997333, 0.9858997333, 0.9858997333, 0.9962963428, 0.9962963428, 0.9962963428, 0.9962963428], degree=3))
            add(Edge.make_bspline(
                [(8.8912698228, 7.8312355092), (8.7443724115, 7.5968247023), (8.4300813424, 7.1040674235), (8.2490221942, 6.4463796274), (8.1878295542, 6.1687122103)],
                knots=[0.4846199148, 0.4846199148, 0.4846199148, 0.4846199148, 0.5180831207, 0.5409332024, 0.5409332024, 0.5409332024, 0.5409332024], degree=3))
        make_face()
        with BuildLine():
            add(Edge.make_bspline(
                [(3.1468981293, 0), (2.8094960148, -0.1221359069), (2.5058736029, -0.2427266561), (2.3102690265, -0.3935788376)],
                knots=[0.8031922007, 0.8031922007, 0.8031922007, 0.8031922007, 0.8411924098, 0.8411924098, 0.8411924098, 0.8411924098], degree=3))
            add(Edge.make_bspline(
                [(3.1468981293, 0), (2.931951581, -0.1477729586), (2.6424011492, -0.2803862363), (2.3102690265, -0.3935788376)],
                knots=[0.8713446892, 0.8713446892, 0.8713446892, 0.8713446892, 0.8960560721, 0.8960560721, 0.8960560721, 0.8960560721], degree=3))
        make_face()
        with BuildLine():
            add(Edge.make_bspline(
                [(9.0967267751, 8.4237661214), (9.1872830239, 8.3111572264), (9.0681882989, 8.1135522795), (8.8912698228, 7.8312355092)],
                knots=[0.4443179154, 0.4443179154, 0.4443179154, 0.4443179154, 0.4846199148, 0.4846199148, 0.4846199148, 0.4846199148], degree=3))
            add(Edge.make_bspline(
                [(8.8912698228, 7.8312355092), (8.9661239491, 8.0303972616), (9.035470522, 8.2285044873), (9.0967267751, 8.4237661214)],
                knots=[0.9962963428, 0.9962963428, 0.9962963428, 0.9962963428, 1, 1, 1, 1], degree=3))
        make_face()
        with BuildLine():
            add(Edge.make_bspline(
                [(7.4740075511, 3.4131261086), (7.3771313095, 3.3624335168), (7.2822878055, 3.2992392111), (7.1890192765, 3.2262825646)],
                knots=[0.600084085, 0.600084085, 0.600084085, 0.600084085, 0.6145875424, 0.6145875424, 0.6145875424, 0.6145875424], degree=3))
            add(Edge.make_bspline(
                [(7.4740075511, 3.4131261086), (7.3918812609, 3.3252002196), (7.2958669077, 3.2663397401), (7.1890192765, 3.2262825646)],
                knots=[0.62901496, 0.62901496, 0.62901496, 0.62901496, 0.6460575689, 0.6460575689, 0.6460575689, 0.6460575689], degree=3))
        make_face()
        with BuildLine():
            add(Edge.make_bspline(
                [(-1.8031777586, -4.4715595432), (-1.8404559451, -4.5218687655), (-1.9006442707, -4.5566302305), (-1.979878497, -4.5776517812)],
                knots=[0, 0, 0, 0, 0.0093101506, 0.0093101506, 0.0093101506, 0.0093101506], degree=3))
            add(Edge.make_bspline(
                [(-1.8031777586, -4.4715595432), (-1.8755957909, -4.5035170932), (-1.9335762537, -4.5388893489), (-1.979878497, -4.5776517812)],
                knots=[0, 0, 0, 0, 0.0069872817, 0.0069872817, 0.0069872817, 0.0069872817], degree=3))
        make_face()
        with BuildLine():
            add(Edge.make_bspline(
                [(1.9512213842, -4.6439997454), (1.8922936141, -4.6055935355), (1.8228111359, -4.5701071192), (1.744488909, -4.5375019388)],
                knots=[0.927836012, 0.927836012, 0.927836012, 0.927836012, 0.9337541015, 0.9337541015, 0.9337541015, 0.9337541015], degree=3))
            add(Edge.make_bspline(
                [(1.744488909, -4.5375019388), (1.803345129, -4.5832576861), (1.8727532468, -4.6184021256), (1.9512213842, -4.6439997454)],
                knots=[0.0044131286, 0.0044131286, 0.0044131286, 0.0044131286, 0.0145414142, 0.0145414142, 0.0145414142, 0.0145414142], degree=3))
        make_face()
        with BuildLine():
            add(Edge.make_bspline(
                [(-1.7579157138, -0.4739991861), (-1.7857845561, -0.4457267794), (-1.8089843102, -0.4155614822), (-1.8278075546, -0.3836305383)],
                knots=[0, 0, 0, 0, 0.0055635331, 0.0055635331, 0.0055635331, 0.0055635331], degree=3))
            add(Edge.make_bspline(
                [(-1.8278075546, -0.3836305383), (-1.7953052931, -0.4085531748), (-1.7716619991, -0.4381831504), (-1.7579157138, -0.4739991861)],
                knots=[0.879202819, 0.879202819, 0.879202819, 0.879202819, 0.8857175032, 0.8857175032, 0.8857175032, 0.8857175032], degree=3))
        make_face()
    extrude(amount=F1_DEPTH)


solid = f1.part
